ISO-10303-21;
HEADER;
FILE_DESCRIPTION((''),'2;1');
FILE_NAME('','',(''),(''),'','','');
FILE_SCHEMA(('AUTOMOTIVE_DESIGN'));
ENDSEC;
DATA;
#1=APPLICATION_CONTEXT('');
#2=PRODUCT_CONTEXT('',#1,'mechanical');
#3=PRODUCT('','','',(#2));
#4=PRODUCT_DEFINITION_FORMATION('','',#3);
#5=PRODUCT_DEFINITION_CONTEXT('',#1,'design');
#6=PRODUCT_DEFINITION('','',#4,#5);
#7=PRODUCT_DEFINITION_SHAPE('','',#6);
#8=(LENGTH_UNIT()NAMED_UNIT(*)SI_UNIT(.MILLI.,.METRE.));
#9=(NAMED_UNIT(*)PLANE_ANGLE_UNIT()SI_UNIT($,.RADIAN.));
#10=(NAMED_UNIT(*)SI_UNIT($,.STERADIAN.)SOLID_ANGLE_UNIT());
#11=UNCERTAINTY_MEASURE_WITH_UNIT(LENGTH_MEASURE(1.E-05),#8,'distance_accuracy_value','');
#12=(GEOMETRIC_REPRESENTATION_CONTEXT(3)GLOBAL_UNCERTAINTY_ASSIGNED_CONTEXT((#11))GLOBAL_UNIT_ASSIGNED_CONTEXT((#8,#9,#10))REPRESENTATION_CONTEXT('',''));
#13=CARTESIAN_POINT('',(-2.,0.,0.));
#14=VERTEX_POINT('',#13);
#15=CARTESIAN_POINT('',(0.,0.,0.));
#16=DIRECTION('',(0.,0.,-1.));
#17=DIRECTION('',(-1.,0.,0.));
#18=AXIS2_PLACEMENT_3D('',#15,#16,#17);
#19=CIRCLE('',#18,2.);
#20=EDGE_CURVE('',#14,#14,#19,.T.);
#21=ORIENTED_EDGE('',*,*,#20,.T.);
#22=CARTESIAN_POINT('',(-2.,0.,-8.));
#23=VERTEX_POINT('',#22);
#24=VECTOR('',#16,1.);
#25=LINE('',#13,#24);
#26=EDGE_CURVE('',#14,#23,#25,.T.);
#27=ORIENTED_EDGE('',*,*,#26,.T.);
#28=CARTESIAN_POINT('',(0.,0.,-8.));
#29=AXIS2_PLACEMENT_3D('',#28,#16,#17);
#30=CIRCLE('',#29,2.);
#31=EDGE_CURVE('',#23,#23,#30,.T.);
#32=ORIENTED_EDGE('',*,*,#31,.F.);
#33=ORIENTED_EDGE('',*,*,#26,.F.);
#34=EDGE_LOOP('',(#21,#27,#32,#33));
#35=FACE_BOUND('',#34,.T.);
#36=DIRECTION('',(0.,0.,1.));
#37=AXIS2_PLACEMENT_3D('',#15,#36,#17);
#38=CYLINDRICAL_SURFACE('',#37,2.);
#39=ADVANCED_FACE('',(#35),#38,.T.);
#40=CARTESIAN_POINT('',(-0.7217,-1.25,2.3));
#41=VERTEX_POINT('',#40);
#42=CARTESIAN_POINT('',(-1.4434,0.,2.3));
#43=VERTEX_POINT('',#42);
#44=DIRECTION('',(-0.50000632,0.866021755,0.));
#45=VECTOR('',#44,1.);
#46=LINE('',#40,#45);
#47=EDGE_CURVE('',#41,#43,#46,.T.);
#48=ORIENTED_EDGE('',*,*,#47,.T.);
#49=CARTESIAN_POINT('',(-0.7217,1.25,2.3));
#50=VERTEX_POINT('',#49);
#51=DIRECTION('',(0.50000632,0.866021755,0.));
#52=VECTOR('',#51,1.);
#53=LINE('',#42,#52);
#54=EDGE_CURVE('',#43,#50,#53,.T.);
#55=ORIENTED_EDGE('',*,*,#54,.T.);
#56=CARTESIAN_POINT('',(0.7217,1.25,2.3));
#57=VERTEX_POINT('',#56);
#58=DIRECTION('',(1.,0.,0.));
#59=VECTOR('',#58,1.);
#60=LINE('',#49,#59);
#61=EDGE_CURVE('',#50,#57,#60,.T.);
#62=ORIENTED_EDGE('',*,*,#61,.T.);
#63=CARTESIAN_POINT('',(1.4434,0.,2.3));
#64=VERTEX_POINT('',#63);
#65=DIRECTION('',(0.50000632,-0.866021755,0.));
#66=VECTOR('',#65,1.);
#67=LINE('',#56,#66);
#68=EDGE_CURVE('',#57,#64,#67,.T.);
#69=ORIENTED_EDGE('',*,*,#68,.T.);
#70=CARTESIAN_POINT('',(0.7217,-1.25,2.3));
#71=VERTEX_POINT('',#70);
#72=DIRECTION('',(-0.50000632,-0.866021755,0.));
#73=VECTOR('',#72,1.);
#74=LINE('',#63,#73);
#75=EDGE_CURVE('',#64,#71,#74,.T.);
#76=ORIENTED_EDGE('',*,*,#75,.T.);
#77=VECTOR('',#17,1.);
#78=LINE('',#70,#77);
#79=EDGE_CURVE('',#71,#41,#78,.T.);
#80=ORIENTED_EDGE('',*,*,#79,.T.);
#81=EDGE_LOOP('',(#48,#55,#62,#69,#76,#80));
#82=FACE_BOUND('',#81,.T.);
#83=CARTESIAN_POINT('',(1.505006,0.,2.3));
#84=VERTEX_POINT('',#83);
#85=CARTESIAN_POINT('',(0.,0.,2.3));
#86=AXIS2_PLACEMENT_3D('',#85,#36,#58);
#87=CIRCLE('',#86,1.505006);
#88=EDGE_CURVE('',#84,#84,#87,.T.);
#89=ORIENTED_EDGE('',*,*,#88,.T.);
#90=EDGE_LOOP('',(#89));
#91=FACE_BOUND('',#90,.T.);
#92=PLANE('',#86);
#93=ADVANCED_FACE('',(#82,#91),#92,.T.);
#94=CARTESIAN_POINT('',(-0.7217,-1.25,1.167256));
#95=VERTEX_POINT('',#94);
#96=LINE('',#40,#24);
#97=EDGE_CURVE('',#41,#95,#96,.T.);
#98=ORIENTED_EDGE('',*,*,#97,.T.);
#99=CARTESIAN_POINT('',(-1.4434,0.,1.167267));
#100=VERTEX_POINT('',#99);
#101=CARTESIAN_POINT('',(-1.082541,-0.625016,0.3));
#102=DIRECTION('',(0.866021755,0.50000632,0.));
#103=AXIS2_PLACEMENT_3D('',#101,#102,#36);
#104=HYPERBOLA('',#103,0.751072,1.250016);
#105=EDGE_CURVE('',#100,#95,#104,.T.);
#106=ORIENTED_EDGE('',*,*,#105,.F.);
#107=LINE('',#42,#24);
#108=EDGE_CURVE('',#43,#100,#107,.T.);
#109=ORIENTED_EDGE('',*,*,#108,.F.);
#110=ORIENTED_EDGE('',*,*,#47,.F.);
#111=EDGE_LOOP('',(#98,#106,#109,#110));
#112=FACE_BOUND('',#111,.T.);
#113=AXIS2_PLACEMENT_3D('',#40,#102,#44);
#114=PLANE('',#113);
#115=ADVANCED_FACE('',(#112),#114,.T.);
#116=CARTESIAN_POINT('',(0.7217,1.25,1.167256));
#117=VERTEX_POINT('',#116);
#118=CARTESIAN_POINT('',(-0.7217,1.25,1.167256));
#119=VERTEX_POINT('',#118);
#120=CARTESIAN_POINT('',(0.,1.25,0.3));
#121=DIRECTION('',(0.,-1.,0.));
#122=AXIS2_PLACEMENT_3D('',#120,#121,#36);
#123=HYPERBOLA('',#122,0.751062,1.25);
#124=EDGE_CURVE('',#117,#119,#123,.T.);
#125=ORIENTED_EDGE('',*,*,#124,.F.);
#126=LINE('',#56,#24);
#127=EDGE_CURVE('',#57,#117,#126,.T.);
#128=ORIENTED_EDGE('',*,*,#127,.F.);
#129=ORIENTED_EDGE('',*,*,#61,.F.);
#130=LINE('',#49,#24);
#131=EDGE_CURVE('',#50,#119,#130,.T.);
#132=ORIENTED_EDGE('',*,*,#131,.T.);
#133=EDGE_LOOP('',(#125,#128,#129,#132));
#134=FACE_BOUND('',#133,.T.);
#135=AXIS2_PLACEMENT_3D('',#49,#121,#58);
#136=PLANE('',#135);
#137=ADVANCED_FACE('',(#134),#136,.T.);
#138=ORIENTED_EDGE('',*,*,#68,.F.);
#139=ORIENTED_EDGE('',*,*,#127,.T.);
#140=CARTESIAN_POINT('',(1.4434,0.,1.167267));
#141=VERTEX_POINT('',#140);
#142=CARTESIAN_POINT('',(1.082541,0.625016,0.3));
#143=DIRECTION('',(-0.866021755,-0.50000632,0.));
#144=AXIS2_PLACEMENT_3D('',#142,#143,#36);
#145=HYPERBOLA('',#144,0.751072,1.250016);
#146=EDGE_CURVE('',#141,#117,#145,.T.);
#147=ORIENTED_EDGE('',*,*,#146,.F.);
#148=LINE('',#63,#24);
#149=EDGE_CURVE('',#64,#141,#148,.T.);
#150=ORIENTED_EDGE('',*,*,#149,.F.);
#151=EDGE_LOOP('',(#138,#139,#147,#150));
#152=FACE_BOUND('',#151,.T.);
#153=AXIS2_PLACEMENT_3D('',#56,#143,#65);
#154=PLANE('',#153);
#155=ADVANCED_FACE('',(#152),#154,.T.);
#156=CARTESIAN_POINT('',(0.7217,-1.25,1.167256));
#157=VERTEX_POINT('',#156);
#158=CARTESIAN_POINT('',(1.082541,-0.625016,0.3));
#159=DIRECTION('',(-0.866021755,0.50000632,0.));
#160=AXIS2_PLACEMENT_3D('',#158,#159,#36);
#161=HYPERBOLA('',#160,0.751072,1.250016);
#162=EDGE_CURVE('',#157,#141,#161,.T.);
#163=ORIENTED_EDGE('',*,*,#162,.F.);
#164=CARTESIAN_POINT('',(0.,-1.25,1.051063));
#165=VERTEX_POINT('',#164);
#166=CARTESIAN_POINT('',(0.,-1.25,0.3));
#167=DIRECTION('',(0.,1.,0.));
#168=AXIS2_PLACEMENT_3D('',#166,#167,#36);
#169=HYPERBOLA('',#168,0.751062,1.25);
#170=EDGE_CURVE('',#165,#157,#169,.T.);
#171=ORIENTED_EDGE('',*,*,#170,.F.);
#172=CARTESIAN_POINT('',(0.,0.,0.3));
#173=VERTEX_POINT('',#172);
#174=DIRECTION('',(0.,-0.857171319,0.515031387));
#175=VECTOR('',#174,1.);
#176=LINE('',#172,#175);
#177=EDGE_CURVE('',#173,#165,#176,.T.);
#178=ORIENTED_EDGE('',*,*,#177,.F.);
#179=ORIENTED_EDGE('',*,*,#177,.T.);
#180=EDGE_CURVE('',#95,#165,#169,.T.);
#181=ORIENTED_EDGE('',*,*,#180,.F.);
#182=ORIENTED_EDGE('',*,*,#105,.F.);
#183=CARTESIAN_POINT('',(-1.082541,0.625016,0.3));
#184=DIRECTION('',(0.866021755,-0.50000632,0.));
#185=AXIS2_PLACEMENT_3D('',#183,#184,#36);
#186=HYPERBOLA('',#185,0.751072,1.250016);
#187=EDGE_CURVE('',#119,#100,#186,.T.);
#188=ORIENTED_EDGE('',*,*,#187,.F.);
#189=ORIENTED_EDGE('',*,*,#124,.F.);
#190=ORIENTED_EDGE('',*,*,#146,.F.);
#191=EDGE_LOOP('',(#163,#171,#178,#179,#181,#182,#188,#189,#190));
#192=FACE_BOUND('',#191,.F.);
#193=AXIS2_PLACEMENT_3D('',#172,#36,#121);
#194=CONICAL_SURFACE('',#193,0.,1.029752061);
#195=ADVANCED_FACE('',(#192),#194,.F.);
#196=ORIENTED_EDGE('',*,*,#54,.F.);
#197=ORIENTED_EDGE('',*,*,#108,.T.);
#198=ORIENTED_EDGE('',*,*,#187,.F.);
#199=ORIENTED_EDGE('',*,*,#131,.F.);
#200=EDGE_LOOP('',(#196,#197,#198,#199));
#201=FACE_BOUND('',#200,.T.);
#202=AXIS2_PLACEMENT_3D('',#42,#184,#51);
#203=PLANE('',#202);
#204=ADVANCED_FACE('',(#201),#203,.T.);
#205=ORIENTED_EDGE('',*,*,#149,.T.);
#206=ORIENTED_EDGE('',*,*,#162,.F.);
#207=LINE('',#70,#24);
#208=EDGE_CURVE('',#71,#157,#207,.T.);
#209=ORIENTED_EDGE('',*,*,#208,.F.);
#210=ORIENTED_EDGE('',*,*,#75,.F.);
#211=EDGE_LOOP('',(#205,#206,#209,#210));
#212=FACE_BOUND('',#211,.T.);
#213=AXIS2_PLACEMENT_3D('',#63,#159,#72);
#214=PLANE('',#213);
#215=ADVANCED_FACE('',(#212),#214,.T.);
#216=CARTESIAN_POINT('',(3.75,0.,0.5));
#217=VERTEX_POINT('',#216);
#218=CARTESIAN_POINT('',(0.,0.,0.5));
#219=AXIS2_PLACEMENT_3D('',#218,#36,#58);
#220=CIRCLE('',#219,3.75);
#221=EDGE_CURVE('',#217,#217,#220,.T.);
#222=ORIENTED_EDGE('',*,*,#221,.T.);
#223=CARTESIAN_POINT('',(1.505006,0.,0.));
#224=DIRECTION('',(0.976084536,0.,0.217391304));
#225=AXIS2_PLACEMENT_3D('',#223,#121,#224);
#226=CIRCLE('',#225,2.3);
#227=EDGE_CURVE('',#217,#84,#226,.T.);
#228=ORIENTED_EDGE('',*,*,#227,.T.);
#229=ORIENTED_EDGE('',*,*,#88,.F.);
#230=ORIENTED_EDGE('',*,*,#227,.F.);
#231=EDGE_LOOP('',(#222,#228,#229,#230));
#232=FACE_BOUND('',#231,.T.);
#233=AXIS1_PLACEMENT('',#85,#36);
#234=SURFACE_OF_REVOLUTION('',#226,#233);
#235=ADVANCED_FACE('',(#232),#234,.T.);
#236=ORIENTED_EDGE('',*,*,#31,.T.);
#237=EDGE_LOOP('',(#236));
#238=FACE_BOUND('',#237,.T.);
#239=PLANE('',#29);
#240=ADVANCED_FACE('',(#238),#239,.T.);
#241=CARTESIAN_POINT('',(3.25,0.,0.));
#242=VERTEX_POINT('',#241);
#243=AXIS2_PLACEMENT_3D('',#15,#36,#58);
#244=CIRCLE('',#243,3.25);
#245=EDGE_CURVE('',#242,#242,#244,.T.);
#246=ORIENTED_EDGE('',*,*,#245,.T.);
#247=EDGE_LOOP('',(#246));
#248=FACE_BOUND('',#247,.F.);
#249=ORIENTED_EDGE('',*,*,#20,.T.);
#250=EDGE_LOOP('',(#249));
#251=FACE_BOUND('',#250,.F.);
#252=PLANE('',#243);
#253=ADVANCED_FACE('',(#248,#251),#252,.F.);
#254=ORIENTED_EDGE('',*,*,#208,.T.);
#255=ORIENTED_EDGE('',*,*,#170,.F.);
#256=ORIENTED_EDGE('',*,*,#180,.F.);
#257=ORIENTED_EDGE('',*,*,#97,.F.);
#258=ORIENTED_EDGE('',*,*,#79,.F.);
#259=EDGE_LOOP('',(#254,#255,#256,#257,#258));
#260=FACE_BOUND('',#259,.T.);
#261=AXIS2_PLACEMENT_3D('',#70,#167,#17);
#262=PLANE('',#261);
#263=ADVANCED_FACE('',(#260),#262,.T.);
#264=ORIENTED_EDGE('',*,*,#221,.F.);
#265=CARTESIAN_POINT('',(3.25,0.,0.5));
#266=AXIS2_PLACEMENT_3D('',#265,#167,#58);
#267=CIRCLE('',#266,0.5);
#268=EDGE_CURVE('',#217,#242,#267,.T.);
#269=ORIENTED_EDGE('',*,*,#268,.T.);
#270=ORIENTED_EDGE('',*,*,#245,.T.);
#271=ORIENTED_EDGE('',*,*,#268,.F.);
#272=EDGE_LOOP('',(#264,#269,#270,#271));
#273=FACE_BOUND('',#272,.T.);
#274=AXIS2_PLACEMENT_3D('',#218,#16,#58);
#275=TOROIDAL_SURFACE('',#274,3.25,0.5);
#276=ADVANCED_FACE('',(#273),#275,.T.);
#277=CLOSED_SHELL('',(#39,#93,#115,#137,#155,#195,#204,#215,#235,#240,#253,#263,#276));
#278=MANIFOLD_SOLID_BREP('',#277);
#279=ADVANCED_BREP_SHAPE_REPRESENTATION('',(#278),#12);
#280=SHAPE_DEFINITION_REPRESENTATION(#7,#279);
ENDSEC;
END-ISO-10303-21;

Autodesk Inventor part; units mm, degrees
ref_plane "YZ Plane" through (0, 0, 0) normal (1, 0, 0) x (0, 1, 0)
ref_plane "XZ Plane" through (0, 0, 0) normal (0, 1, 0) x (-1, 0, 0)
ref_plane "XY Plane" through (0, 0, 0) normal (0, 0, 1) x (1, 0, 0)
sketch "Sketch1" plane through (0, 0, 0) normal (0, 0, 1) x (1, 0, 0)
  circle A0 centre (0, 0) radius 3.75
  dimension "d0" = 7.5
extrude "Extrusion1" add sketch "Sketch1" along normal blind 2.3
fillet "Fillet3" radius 0.5 1 edges at (-3.75, 0, 0)
fillet "Fillet4" radius 2.3 1 edges at (-3.75, 0, 2.3)
sketch "草圖6" plane through (0, 0, 2.3) normal (0, 0, 1) x (1, 0, 0)
  circle A0 centre (0, 0) radius 1.505 projected
  line L0 (0.7217, 1.25) -> (1.4434, 0)
  line L1 (1.4434, 0) -> (0.7217, -1.25)
  line L2 (0.7217, -1.25) -> (-0.7217, -1.25)
  line L3 (-0.7217, -1.25) -> (-1.4434, 0)
  line L4 (-1.4434, 0) -> (-0.7217, 1.25)
  line L5 (-0.7217, 1.25) -> (0.7217, 1.25)
  dimension "d27" = 2.5
extrude "擠出4" cut sketch "草圖6" against normal blind 2 contours L0 L1 L2 L3 L4 L5
sketch "草圖7" plane through (0, 0, 0) normal (1, 0, 0) x (0, 1, 0)
  line L0 (0, 0.3) -> (-2, 1.5017)
  line L1 (-2, 1.5017) -> (-2, 0.3)
  line L2 (0, 0.3) -> (-2, 0.3)
  line L3 (0, 0) -> (0, 2.4201)
  dimension "d30" = 0.3
  dimension "d31" = 31
  dimension "d34" = 2
revolve "迴轉3" add sketch "草圖7" angle 360 about axis through (0, 0, 0) along (0, 0, 1)
sketch "草圖8" plane through (0, 0, 0) normal (0, 0, -1) x (-1, 0, 0)
  circle A0 centre (0, 0) radius 3.25 projected
  circle A1 centre (0, 0) radius 2
  dimension "d35" = 4
extrude "擠出5" add sketch "草圖8" along normal blind 8 contours A1
thread "螺紋2" size "M4x0.7" class "6g" standard "ANSI Metric M Profile" full length
properties part number "screw_M3_10_hex"
